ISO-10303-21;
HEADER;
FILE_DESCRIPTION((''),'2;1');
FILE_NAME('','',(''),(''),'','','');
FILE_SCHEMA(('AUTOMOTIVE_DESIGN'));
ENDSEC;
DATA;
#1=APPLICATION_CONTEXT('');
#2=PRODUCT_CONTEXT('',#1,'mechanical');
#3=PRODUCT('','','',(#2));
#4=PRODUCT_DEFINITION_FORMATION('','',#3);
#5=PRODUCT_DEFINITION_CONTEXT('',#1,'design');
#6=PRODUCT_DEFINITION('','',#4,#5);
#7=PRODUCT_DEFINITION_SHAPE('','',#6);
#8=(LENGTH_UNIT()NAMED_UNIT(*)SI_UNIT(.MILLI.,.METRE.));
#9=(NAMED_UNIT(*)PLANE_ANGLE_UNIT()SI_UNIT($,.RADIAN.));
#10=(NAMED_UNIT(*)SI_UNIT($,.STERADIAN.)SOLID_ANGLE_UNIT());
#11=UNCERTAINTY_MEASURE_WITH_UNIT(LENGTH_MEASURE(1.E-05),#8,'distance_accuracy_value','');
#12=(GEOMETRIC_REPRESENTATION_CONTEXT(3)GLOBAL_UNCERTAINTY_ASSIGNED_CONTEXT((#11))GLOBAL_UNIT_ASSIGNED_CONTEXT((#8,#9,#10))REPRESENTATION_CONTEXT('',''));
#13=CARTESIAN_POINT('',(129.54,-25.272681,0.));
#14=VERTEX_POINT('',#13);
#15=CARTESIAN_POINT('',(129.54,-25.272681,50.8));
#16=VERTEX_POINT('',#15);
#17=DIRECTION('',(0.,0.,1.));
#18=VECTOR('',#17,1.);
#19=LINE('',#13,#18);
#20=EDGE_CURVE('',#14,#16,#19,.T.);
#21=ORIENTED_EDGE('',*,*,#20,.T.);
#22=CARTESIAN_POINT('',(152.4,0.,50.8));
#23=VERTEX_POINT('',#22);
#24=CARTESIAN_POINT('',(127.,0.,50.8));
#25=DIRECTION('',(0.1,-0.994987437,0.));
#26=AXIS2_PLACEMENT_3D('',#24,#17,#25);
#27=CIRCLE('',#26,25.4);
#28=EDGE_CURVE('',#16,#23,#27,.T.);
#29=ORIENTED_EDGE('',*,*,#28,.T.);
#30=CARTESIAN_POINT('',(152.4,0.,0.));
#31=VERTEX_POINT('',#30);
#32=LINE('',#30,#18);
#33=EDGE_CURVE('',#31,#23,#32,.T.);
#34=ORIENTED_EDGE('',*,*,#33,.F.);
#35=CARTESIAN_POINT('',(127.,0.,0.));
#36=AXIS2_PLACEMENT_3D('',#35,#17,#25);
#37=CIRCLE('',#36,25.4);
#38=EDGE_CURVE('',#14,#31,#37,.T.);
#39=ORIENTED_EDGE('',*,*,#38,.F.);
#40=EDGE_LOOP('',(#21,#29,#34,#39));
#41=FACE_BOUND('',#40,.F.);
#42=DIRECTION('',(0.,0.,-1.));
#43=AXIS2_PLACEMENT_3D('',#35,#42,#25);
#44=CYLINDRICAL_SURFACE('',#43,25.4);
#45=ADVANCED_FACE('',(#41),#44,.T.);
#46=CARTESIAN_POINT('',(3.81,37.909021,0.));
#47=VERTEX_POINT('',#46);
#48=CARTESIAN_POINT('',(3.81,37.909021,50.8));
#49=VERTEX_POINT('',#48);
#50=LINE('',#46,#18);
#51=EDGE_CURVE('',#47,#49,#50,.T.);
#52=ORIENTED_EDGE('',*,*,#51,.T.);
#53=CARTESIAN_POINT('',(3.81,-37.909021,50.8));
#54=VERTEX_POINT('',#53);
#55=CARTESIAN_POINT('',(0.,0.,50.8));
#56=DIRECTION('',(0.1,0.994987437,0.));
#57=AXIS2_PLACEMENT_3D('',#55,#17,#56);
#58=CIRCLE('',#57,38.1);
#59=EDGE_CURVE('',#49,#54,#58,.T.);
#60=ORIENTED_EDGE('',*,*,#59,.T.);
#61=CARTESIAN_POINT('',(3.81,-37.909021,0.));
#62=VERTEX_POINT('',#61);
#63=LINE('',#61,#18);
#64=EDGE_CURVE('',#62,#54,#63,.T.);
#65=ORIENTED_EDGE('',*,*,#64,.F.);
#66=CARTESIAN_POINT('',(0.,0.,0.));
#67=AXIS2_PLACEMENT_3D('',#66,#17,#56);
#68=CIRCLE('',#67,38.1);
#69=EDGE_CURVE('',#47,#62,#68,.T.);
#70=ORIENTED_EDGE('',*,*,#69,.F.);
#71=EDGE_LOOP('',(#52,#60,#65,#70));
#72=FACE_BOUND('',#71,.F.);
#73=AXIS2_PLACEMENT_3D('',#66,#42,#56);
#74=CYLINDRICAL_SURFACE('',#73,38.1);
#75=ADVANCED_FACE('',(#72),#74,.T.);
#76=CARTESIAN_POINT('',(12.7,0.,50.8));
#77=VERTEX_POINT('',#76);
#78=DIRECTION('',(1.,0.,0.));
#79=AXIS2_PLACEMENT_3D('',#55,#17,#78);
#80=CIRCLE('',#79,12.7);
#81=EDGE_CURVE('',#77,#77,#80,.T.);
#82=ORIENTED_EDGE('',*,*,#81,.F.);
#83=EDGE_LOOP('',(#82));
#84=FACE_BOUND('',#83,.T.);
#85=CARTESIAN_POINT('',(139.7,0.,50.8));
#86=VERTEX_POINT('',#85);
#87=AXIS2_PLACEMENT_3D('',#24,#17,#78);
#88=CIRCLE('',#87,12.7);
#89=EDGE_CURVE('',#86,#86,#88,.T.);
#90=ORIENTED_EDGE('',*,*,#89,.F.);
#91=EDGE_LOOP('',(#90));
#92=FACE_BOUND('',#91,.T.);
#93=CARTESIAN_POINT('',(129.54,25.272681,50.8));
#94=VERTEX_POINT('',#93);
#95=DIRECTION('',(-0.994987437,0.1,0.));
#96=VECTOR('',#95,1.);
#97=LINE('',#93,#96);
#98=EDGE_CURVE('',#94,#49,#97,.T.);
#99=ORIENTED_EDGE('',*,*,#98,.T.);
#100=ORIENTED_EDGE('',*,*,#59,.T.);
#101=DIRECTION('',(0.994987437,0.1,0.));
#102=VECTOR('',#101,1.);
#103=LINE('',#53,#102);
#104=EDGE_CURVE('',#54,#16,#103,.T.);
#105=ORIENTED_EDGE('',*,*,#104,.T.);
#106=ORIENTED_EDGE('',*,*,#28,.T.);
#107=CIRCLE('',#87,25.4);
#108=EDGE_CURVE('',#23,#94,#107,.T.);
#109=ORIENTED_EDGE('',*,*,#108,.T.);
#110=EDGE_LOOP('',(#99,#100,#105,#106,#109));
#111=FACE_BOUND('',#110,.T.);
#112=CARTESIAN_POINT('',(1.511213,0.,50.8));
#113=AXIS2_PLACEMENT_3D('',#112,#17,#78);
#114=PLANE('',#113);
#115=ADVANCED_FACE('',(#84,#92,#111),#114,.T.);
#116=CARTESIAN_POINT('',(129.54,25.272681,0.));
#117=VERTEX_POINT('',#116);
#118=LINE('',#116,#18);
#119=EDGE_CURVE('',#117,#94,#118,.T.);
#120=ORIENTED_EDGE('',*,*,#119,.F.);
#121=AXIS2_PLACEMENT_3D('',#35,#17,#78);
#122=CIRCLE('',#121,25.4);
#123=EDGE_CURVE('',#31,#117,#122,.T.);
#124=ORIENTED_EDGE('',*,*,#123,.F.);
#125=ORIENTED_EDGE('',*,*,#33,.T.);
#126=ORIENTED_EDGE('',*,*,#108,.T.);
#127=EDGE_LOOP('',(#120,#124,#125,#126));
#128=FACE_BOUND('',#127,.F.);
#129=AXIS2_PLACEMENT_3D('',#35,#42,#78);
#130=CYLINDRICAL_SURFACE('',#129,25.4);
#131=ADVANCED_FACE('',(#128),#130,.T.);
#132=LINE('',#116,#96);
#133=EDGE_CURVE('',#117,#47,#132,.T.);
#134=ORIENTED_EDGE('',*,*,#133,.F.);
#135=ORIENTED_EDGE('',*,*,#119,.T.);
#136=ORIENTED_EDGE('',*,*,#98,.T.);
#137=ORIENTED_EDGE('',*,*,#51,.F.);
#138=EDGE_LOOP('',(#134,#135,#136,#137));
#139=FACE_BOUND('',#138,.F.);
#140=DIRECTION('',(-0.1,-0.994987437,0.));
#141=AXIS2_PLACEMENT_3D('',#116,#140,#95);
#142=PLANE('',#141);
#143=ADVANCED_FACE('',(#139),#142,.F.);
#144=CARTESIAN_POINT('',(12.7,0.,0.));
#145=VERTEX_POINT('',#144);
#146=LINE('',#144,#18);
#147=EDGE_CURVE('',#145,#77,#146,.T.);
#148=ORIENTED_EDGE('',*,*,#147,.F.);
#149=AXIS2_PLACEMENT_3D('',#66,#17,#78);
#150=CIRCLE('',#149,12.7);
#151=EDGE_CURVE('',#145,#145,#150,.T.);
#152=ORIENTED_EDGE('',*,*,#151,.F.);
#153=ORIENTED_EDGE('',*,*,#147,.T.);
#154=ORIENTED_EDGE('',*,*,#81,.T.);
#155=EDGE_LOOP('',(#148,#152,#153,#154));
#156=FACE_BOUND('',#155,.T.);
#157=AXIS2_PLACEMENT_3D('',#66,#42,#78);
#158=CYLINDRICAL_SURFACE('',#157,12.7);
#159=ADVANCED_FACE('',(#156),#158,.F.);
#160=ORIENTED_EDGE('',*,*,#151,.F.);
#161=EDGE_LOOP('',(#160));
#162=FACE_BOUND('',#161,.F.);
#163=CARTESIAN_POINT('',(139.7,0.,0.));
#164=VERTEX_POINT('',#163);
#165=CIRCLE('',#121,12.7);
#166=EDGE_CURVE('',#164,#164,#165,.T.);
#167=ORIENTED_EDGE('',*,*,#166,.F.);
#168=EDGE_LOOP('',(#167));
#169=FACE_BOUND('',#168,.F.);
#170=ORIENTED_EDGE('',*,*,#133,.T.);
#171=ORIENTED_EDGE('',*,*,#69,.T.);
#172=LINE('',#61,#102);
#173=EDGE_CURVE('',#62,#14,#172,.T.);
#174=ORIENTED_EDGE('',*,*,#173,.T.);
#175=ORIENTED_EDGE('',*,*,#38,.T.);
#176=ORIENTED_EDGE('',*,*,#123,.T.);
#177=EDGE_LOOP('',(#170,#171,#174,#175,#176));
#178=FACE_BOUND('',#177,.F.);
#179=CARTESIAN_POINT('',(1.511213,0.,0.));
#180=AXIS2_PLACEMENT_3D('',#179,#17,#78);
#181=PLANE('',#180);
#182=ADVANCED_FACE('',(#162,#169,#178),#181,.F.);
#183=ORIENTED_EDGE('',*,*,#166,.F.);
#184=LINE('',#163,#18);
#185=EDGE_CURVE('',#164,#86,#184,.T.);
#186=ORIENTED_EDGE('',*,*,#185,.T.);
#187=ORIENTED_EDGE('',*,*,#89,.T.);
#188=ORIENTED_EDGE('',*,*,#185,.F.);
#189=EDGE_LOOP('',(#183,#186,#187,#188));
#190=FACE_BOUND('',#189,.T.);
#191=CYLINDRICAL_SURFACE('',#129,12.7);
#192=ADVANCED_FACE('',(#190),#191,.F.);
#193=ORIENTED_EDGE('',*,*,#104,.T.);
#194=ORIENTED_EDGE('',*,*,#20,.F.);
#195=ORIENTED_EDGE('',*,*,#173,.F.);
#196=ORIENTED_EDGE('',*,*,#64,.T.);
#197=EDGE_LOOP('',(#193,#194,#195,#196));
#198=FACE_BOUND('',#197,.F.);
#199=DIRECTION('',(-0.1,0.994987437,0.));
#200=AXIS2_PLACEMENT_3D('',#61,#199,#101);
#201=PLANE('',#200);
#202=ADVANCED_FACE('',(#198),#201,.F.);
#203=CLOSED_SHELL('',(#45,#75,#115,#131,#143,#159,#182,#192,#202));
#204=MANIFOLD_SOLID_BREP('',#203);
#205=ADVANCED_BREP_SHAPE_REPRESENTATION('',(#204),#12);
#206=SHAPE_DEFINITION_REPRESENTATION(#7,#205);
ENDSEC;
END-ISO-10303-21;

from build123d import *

# Parameters (mm, degrees)
F0_R     = 12.7
F1_DEPTH = 50.8


# Not quite as in the source:
# - the program builds the solid bodies; features that only make, move or delete a surface that nothing else refers to are left out


with BuildPart() as f1:
    # F0 (on Top) → F1 (new body)
    with BuildSketch(Plane.XY):
        with BuildLine():
            ThreePointArc((3.81, -37.9090213538), (28.2557162358, -25.5582569828), (38.1, 0))
            ThreePointArc((38.1, 0), (28.2557162358, 25.5582569828), (3.81, 37.9090213538))
            ThreePointArc((3.81, 37.9090213538), (-38.1, 0), (3.81, -37.9090213538))
        make_face()
        Circle(F0_R, mode=Mode.SUBTRACT)
        with BuildLine():
            ThreePointArc((3.81, 37.9090213538), (28.2557162358, 25.5582569828), (38.1, 0))
            ThreePointArc((38.1, 0), (28.2557162358, -25.5582569828), (3.81, -37.9090213538))
            Line((3.81, -37.9090213538), (129.54, -25.2726809025))
            ThreePointArc((129.54, -25.2726809025), (101.6, 0), (129.54, 25.2726809025))
            Line((129.54, 25.2726809025), (3.81, 37.9090213538))
        make_face()
        with BuildLine():
            ThreePointArc((152.4, 0), (145.8371441572, 17.0388379885), (129.54, 25.2726809025))
            ThreePointArc((129.54, 25.2726809025), (101.6, 0), (129.54, -25.2726809025))
            ThreePointArc((129.54, -25.2726809025), (145.8371441572, -17.0388379885), (152.4, 0))
        make_face()
        with Locations((127, 0)):
            Circle(F0_R, mode=Mode.SUBTRACT)
    extrude(amount=F1_DEPTH)


solid = f1.part
